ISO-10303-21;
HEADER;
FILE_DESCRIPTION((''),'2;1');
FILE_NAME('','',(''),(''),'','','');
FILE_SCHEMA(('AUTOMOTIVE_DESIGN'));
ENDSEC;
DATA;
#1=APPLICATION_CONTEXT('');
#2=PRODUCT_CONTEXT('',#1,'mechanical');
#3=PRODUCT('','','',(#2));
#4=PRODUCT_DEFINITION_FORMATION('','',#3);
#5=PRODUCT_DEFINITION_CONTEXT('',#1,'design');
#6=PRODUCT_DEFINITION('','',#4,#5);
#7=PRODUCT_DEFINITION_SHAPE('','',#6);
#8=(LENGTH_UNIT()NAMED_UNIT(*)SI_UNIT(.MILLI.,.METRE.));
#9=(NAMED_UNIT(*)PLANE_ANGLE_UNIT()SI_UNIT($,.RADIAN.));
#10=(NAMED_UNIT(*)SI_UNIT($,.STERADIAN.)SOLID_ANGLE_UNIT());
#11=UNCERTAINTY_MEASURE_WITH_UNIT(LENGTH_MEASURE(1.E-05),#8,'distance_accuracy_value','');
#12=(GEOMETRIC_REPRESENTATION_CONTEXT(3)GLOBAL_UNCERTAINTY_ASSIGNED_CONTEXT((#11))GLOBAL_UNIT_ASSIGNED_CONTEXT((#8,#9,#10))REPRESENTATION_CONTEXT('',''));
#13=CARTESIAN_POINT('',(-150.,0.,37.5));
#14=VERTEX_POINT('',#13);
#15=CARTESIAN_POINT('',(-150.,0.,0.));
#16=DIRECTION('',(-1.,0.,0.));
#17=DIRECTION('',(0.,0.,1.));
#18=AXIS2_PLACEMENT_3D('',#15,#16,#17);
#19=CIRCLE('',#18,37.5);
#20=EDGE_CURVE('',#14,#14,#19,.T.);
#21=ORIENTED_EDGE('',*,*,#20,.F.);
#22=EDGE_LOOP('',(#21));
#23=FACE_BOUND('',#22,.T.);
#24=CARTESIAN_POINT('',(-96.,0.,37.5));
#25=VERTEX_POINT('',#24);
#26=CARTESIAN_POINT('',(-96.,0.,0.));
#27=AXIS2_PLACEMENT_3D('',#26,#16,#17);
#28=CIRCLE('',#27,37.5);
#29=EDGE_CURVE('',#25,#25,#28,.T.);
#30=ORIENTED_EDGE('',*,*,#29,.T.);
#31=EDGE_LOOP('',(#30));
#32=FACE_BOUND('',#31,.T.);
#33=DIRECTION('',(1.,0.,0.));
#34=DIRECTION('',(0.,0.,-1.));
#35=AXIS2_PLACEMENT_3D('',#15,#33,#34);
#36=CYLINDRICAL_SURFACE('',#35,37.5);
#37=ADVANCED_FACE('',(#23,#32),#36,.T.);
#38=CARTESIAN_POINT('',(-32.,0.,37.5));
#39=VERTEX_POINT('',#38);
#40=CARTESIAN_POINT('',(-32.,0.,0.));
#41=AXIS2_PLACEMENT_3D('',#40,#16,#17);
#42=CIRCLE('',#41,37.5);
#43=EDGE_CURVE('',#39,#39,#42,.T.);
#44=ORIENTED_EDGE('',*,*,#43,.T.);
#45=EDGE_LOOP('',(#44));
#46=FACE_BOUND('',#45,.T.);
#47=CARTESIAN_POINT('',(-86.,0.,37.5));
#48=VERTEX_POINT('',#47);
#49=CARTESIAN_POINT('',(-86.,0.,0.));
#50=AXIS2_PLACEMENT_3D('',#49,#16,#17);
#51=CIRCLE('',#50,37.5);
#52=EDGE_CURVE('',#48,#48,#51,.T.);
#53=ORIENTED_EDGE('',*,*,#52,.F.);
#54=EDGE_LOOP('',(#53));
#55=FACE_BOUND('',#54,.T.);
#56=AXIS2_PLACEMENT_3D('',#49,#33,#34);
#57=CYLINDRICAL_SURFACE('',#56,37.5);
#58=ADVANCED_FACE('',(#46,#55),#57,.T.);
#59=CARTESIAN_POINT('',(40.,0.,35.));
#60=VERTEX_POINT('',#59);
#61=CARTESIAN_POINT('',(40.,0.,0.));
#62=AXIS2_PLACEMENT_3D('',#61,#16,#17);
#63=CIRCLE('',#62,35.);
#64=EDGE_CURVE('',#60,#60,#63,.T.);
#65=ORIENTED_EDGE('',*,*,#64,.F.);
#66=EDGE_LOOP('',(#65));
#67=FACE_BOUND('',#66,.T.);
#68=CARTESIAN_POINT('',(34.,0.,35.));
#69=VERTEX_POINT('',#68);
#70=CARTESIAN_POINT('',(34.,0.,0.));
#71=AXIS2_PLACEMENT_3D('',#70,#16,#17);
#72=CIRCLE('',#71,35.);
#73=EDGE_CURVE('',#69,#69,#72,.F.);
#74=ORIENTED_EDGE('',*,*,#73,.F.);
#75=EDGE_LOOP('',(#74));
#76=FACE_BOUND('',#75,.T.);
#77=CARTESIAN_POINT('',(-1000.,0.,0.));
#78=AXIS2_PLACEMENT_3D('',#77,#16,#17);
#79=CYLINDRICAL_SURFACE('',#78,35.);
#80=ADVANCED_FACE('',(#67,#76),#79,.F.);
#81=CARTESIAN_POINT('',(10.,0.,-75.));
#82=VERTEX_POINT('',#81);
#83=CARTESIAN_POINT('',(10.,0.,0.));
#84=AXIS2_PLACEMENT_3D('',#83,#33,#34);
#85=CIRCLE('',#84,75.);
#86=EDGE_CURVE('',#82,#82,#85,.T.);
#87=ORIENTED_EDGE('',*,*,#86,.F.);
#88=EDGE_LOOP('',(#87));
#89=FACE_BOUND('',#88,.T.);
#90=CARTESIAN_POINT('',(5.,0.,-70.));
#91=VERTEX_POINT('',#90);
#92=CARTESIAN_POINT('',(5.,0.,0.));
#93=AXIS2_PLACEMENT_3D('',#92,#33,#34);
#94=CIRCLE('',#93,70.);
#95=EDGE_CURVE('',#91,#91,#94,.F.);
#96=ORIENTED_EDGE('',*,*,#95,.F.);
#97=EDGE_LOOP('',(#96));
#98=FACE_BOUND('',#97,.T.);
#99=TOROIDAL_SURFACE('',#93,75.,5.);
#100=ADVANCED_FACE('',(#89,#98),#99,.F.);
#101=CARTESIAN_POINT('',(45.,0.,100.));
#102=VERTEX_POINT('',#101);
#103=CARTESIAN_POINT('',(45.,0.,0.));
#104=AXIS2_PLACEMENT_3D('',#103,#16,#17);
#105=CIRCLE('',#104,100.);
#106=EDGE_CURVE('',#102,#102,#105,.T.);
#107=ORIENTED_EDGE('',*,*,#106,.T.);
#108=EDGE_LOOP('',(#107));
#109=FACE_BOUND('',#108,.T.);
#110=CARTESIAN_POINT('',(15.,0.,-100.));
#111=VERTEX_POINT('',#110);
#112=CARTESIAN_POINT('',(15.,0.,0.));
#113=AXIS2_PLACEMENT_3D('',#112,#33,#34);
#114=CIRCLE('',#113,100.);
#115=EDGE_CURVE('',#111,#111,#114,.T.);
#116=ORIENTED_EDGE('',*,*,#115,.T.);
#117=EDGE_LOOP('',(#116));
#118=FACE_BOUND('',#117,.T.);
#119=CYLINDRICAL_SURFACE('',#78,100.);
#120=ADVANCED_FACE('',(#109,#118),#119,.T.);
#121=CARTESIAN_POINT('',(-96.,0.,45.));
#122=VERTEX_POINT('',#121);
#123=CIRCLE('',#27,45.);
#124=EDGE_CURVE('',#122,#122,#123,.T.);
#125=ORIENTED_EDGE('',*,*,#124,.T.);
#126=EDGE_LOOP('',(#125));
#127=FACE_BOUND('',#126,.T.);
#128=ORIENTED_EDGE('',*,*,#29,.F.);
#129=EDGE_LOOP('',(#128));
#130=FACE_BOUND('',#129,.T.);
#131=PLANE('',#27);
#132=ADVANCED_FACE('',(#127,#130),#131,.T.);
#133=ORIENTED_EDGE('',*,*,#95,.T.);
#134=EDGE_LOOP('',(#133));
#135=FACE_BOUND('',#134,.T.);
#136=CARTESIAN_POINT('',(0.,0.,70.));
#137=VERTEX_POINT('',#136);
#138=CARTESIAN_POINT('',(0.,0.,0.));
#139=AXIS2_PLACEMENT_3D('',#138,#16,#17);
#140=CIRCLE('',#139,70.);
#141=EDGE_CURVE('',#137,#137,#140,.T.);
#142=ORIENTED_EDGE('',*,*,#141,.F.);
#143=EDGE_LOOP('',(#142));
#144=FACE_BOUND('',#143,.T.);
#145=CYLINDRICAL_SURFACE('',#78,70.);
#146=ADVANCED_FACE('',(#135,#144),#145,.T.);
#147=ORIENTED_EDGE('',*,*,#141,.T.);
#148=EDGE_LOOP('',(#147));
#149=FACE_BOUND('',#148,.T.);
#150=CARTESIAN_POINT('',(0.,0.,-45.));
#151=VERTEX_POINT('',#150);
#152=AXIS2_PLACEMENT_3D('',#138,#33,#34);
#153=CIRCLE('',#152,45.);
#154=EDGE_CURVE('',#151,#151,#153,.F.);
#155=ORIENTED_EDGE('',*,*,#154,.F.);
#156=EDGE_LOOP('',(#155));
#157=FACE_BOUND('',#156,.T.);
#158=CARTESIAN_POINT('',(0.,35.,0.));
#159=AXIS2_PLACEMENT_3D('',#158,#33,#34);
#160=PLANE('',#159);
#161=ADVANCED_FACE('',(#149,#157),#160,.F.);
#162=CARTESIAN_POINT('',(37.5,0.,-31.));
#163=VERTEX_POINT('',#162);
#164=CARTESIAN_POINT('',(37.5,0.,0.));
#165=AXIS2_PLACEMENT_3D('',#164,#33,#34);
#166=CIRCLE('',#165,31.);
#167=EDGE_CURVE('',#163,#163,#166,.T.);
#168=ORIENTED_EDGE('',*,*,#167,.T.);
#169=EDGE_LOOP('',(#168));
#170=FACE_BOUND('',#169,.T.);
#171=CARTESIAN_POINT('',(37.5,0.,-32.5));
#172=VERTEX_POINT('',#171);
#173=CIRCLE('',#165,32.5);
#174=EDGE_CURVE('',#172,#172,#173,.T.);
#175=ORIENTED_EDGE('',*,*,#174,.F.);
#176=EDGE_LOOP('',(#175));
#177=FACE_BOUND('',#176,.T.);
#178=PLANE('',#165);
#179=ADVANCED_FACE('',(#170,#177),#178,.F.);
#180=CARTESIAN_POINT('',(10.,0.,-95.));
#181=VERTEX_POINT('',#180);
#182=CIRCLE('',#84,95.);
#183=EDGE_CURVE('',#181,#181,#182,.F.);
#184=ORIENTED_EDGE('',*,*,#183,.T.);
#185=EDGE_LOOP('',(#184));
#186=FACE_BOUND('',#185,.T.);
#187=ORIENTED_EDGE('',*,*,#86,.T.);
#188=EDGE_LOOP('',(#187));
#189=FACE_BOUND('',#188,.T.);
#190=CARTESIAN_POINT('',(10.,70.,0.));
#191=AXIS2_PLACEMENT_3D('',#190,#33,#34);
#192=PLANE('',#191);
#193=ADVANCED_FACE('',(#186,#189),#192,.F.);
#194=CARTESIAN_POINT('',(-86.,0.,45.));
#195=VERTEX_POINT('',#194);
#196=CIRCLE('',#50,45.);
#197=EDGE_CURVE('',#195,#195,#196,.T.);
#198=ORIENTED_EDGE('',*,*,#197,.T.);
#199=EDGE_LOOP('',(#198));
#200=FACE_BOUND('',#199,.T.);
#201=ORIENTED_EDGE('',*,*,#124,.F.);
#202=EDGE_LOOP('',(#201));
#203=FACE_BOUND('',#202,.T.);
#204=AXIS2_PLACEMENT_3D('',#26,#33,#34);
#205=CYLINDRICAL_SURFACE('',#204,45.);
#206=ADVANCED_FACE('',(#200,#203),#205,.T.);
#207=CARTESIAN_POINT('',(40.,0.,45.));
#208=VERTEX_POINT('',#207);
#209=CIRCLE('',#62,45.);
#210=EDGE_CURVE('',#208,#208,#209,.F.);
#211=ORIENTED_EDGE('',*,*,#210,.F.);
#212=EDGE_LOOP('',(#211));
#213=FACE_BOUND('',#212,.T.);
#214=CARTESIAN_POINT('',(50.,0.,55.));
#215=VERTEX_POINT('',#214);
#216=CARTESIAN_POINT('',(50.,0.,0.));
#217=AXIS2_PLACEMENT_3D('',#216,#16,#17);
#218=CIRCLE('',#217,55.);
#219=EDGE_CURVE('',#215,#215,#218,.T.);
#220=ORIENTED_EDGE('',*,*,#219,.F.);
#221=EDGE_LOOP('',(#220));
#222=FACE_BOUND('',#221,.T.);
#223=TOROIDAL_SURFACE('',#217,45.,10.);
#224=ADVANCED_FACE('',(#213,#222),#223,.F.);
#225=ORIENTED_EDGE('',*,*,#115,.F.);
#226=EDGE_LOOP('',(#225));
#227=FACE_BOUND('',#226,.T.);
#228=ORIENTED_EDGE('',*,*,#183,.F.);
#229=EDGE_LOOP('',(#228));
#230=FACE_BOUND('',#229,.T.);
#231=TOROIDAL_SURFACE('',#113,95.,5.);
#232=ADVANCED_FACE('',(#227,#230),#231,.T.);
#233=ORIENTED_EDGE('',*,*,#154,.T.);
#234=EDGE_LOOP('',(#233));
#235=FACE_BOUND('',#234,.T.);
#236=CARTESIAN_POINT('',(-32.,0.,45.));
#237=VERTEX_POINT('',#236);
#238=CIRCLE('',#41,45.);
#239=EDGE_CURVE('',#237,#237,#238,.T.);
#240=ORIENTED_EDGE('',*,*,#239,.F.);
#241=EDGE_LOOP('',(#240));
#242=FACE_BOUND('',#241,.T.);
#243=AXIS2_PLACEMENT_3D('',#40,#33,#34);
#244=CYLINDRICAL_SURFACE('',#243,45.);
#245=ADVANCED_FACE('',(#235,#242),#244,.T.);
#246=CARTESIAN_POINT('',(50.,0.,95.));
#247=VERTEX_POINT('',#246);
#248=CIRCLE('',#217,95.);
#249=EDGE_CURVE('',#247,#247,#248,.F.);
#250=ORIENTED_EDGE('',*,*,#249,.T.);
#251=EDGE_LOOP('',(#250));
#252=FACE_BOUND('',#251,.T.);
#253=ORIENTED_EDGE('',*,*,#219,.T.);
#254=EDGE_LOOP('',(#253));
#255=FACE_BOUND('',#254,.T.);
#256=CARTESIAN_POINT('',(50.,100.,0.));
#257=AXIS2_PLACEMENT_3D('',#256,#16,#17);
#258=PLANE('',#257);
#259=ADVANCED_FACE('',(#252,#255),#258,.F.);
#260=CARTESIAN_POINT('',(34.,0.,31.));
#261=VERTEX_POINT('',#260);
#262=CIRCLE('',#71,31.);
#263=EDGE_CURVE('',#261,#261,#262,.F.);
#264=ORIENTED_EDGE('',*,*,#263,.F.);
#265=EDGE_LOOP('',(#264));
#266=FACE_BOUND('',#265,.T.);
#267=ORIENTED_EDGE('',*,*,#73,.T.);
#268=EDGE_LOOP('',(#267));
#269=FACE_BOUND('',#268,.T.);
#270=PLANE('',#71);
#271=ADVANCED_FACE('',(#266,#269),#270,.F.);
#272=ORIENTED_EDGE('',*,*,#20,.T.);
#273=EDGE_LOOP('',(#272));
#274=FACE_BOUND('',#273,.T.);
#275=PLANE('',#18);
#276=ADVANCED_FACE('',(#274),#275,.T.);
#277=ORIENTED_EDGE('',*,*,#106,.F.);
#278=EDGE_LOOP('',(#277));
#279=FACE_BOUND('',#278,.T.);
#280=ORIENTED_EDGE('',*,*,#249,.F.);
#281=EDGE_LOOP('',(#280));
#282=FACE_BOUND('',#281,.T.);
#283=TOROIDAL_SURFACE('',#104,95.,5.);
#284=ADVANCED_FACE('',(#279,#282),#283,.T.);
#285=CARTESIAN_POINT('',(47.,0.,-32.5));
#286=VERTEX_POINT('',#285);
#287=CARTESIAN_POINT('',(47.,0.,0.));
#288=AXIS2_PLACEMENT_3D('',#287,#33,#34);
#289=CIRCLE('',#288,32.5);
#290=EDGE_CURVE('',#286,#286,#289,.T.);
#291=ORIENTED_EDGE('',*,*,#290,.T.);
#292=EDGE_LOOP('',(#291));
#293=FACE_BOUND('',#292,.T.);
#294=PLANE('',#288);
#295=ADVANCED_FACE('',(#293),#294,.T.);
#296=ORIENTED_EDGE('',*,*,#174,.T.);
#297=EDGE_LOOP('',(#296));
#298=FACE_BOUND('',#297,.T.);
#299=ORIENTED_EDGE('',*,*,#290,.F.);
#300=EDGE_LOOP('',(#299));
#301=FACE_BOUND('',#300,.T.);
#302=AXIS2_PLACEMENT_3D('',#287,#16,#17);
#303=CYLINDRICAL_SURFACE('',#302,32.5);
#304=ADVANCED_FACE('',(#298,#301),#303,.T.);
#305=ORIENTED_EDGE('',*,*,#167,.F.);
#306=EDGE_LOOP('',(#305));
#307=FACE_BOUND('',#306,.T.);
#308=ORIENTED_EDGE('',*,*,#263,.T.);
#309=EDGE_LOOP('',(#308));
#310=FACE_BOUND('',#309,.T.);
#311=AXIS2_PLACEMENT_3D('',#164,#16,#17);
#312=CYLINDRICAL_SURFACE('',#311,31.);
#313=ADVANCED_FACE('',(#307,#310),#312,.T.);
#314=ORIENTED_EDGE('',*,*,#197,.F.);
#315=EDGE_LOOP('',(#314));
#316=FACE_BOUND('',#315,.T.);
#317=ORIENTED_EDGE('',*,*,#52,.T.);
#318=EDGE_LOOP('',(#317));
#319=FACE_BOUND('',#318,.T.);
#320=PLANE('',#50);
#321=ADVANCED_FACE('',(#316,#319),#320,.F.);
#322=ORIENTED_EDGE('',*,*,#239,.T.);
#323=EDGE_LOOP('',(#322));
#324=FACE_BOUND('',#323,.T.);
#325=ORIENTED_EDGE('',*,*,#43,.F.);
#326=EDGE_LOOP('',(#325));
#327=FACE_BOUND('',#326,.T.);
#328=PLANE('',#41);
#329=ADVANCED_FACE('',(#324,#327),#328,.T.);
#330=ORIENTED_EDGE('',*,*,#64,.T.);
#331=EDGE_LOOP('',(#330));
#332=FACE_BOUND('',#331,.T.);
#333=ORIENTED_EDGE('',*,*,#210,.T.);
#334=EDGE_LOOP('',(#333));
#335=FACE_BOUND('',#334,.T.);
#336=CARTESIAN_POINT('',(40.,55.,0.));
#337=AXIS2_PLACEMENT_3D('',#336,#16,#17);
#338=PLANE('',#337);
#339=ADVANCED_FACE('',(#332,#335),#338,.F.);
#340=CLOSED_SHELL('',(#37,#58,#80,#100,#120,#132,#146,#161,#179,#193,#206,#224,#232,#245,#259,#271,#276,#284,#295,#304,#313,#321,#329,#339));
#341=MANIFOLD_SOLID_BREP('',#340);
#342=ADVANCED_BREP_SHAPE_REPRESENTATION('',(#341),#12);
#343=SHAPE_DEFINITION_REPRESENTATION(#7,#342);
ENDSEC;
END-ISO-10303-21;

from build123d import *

# Parameters (mm, degrees)
FILLET_1_R      = 5
FILLET_2_R      = 10
SKETCH_2_R      = 45
SKETCH_2_R_2    = 35
EXTRUDE_1_DEPTH = 32
SKETCH_3_R      = 35
EXTRUDE_2_DEPTH = 66
SKETCH_4_R      = 37.5
EXTRUDE_3_DEPTH = 54
SKETCH_5_R      = 45
EXTRUDE_4_DEPTH = 10
SKETCH_6_R      = 37.5
EXTRUDE_5_DEPTH = 54
SKETCH_9_R      = 31
EXTRUDE_8_DEPTH = 3.5
SKETCH_10_R     = 32.5
EXTRUDE_9_DEPTH = 9.5


with BuildPart() as part:
    # 草图1 → 旋转1 (revolve)
    with BuildSketch(Plane.XY, mode=Mode.PRIVATE) as revolve_1_sk:
        Polygon((10, 100), (50, 100), (50, 55), (40, 55), (40, 35), (0, 35), (0, 70), (10, 70), align=None)
    revolve(revolve_1_sk.sketch.rotate(Axis((-1000, 0, 0), (1, 0, 0)), 90), axis=Axis((-1000, 0, 0), (1, 0, 0)))

    # 圆角1
    fillet_1_edges = [part.edges().sort_by_distance(p)[0] for p in [
        (10, 0, -70),
        (50, 0, -100),
        (10, 0, -100),
    ]]
    fillet(fillet_1_edges, radius=FILLET_1_R)

    # 圆角2
    fillet_2_edges = [part.edges().sort_by_distance(p)[0] for p in [
        (40, 0, -55),
    ]]
    fillet(fillet_2_edges, radius=FILLET_2_R - 0.0001)  # a hair under: the kernel refuses the full size



with BuildPart() as body_2:
    # 草图2 → 凸台-拉伸1 (new body)
    with BuildSketch(Plane.ZY):
        Circle(SKETCH_2_R)
        Circle(SKETCH_2_R_2, mode=Mode.SUBTRACT)
    extrude(amount=EXTRUDE_1_DEPTH)


with BuildPart() as part_1:
    add(part.part)

    add(body_2.part)  # 凸台-拉伸2 merges body 2
    # 草图3 → 凸台-拉伸2 (add)
    with BuildSketch(Plane.ZY.offset(32)):
        Circle(SKETCH_3_R)
    extrude(amount=-EXTRUDE_2_DEPTH)

    # 草图4 → 凸台-拉伸3 (add)
    with BuildSketch(Plane.ZY.offset(32)):
        Circle(SKETCH_4_R)
    extrude(amount=EXTRUDE_3_DEPTH)

    # 草图5 → 凸台-拉伸4 (add)
    with BuildSketch(Plane.ZY.offset(86)):
        with Locations(Location((0, 0, 0), (0, 0, 180))):
            Circle(SKETCH_5_R)
    extrude(amount=EXTRUDE_4_DEPTH)

    # 草图6 → 凸台-拉伸5 (add)
    with BuildSketch(Plane.ZY.offset(96)):
        Circle(SKETCH_6_R)
    extrude(amount=EXTRUDE_5_DEPTH)

    # 草图9 → 凸台-拉伸8 (add)
    with BuildSketch(Plane(origin=(34, 0, 0), x_dir=(0, 0, -1), z_dir=(1, 0, 0))):
        with Locations(Location((0, 0, 0), (0, 0, 180))):
            Circle(SKETCH_9_R)
    extrude(amount=EXTRUDE_8_DEPTH)

    # 草图10 → 凸台-拉伸9 (add)
    with BuildSketch(Plane(origin=(37.5, 0, 0), x_dir=(0, 0, -1), z_dir=(1, 0, 0))):
        Circle(SKETCH_10_R)
    extrude(amount=EXTRUDE_9_DEPTH)


solid = part_1.part
